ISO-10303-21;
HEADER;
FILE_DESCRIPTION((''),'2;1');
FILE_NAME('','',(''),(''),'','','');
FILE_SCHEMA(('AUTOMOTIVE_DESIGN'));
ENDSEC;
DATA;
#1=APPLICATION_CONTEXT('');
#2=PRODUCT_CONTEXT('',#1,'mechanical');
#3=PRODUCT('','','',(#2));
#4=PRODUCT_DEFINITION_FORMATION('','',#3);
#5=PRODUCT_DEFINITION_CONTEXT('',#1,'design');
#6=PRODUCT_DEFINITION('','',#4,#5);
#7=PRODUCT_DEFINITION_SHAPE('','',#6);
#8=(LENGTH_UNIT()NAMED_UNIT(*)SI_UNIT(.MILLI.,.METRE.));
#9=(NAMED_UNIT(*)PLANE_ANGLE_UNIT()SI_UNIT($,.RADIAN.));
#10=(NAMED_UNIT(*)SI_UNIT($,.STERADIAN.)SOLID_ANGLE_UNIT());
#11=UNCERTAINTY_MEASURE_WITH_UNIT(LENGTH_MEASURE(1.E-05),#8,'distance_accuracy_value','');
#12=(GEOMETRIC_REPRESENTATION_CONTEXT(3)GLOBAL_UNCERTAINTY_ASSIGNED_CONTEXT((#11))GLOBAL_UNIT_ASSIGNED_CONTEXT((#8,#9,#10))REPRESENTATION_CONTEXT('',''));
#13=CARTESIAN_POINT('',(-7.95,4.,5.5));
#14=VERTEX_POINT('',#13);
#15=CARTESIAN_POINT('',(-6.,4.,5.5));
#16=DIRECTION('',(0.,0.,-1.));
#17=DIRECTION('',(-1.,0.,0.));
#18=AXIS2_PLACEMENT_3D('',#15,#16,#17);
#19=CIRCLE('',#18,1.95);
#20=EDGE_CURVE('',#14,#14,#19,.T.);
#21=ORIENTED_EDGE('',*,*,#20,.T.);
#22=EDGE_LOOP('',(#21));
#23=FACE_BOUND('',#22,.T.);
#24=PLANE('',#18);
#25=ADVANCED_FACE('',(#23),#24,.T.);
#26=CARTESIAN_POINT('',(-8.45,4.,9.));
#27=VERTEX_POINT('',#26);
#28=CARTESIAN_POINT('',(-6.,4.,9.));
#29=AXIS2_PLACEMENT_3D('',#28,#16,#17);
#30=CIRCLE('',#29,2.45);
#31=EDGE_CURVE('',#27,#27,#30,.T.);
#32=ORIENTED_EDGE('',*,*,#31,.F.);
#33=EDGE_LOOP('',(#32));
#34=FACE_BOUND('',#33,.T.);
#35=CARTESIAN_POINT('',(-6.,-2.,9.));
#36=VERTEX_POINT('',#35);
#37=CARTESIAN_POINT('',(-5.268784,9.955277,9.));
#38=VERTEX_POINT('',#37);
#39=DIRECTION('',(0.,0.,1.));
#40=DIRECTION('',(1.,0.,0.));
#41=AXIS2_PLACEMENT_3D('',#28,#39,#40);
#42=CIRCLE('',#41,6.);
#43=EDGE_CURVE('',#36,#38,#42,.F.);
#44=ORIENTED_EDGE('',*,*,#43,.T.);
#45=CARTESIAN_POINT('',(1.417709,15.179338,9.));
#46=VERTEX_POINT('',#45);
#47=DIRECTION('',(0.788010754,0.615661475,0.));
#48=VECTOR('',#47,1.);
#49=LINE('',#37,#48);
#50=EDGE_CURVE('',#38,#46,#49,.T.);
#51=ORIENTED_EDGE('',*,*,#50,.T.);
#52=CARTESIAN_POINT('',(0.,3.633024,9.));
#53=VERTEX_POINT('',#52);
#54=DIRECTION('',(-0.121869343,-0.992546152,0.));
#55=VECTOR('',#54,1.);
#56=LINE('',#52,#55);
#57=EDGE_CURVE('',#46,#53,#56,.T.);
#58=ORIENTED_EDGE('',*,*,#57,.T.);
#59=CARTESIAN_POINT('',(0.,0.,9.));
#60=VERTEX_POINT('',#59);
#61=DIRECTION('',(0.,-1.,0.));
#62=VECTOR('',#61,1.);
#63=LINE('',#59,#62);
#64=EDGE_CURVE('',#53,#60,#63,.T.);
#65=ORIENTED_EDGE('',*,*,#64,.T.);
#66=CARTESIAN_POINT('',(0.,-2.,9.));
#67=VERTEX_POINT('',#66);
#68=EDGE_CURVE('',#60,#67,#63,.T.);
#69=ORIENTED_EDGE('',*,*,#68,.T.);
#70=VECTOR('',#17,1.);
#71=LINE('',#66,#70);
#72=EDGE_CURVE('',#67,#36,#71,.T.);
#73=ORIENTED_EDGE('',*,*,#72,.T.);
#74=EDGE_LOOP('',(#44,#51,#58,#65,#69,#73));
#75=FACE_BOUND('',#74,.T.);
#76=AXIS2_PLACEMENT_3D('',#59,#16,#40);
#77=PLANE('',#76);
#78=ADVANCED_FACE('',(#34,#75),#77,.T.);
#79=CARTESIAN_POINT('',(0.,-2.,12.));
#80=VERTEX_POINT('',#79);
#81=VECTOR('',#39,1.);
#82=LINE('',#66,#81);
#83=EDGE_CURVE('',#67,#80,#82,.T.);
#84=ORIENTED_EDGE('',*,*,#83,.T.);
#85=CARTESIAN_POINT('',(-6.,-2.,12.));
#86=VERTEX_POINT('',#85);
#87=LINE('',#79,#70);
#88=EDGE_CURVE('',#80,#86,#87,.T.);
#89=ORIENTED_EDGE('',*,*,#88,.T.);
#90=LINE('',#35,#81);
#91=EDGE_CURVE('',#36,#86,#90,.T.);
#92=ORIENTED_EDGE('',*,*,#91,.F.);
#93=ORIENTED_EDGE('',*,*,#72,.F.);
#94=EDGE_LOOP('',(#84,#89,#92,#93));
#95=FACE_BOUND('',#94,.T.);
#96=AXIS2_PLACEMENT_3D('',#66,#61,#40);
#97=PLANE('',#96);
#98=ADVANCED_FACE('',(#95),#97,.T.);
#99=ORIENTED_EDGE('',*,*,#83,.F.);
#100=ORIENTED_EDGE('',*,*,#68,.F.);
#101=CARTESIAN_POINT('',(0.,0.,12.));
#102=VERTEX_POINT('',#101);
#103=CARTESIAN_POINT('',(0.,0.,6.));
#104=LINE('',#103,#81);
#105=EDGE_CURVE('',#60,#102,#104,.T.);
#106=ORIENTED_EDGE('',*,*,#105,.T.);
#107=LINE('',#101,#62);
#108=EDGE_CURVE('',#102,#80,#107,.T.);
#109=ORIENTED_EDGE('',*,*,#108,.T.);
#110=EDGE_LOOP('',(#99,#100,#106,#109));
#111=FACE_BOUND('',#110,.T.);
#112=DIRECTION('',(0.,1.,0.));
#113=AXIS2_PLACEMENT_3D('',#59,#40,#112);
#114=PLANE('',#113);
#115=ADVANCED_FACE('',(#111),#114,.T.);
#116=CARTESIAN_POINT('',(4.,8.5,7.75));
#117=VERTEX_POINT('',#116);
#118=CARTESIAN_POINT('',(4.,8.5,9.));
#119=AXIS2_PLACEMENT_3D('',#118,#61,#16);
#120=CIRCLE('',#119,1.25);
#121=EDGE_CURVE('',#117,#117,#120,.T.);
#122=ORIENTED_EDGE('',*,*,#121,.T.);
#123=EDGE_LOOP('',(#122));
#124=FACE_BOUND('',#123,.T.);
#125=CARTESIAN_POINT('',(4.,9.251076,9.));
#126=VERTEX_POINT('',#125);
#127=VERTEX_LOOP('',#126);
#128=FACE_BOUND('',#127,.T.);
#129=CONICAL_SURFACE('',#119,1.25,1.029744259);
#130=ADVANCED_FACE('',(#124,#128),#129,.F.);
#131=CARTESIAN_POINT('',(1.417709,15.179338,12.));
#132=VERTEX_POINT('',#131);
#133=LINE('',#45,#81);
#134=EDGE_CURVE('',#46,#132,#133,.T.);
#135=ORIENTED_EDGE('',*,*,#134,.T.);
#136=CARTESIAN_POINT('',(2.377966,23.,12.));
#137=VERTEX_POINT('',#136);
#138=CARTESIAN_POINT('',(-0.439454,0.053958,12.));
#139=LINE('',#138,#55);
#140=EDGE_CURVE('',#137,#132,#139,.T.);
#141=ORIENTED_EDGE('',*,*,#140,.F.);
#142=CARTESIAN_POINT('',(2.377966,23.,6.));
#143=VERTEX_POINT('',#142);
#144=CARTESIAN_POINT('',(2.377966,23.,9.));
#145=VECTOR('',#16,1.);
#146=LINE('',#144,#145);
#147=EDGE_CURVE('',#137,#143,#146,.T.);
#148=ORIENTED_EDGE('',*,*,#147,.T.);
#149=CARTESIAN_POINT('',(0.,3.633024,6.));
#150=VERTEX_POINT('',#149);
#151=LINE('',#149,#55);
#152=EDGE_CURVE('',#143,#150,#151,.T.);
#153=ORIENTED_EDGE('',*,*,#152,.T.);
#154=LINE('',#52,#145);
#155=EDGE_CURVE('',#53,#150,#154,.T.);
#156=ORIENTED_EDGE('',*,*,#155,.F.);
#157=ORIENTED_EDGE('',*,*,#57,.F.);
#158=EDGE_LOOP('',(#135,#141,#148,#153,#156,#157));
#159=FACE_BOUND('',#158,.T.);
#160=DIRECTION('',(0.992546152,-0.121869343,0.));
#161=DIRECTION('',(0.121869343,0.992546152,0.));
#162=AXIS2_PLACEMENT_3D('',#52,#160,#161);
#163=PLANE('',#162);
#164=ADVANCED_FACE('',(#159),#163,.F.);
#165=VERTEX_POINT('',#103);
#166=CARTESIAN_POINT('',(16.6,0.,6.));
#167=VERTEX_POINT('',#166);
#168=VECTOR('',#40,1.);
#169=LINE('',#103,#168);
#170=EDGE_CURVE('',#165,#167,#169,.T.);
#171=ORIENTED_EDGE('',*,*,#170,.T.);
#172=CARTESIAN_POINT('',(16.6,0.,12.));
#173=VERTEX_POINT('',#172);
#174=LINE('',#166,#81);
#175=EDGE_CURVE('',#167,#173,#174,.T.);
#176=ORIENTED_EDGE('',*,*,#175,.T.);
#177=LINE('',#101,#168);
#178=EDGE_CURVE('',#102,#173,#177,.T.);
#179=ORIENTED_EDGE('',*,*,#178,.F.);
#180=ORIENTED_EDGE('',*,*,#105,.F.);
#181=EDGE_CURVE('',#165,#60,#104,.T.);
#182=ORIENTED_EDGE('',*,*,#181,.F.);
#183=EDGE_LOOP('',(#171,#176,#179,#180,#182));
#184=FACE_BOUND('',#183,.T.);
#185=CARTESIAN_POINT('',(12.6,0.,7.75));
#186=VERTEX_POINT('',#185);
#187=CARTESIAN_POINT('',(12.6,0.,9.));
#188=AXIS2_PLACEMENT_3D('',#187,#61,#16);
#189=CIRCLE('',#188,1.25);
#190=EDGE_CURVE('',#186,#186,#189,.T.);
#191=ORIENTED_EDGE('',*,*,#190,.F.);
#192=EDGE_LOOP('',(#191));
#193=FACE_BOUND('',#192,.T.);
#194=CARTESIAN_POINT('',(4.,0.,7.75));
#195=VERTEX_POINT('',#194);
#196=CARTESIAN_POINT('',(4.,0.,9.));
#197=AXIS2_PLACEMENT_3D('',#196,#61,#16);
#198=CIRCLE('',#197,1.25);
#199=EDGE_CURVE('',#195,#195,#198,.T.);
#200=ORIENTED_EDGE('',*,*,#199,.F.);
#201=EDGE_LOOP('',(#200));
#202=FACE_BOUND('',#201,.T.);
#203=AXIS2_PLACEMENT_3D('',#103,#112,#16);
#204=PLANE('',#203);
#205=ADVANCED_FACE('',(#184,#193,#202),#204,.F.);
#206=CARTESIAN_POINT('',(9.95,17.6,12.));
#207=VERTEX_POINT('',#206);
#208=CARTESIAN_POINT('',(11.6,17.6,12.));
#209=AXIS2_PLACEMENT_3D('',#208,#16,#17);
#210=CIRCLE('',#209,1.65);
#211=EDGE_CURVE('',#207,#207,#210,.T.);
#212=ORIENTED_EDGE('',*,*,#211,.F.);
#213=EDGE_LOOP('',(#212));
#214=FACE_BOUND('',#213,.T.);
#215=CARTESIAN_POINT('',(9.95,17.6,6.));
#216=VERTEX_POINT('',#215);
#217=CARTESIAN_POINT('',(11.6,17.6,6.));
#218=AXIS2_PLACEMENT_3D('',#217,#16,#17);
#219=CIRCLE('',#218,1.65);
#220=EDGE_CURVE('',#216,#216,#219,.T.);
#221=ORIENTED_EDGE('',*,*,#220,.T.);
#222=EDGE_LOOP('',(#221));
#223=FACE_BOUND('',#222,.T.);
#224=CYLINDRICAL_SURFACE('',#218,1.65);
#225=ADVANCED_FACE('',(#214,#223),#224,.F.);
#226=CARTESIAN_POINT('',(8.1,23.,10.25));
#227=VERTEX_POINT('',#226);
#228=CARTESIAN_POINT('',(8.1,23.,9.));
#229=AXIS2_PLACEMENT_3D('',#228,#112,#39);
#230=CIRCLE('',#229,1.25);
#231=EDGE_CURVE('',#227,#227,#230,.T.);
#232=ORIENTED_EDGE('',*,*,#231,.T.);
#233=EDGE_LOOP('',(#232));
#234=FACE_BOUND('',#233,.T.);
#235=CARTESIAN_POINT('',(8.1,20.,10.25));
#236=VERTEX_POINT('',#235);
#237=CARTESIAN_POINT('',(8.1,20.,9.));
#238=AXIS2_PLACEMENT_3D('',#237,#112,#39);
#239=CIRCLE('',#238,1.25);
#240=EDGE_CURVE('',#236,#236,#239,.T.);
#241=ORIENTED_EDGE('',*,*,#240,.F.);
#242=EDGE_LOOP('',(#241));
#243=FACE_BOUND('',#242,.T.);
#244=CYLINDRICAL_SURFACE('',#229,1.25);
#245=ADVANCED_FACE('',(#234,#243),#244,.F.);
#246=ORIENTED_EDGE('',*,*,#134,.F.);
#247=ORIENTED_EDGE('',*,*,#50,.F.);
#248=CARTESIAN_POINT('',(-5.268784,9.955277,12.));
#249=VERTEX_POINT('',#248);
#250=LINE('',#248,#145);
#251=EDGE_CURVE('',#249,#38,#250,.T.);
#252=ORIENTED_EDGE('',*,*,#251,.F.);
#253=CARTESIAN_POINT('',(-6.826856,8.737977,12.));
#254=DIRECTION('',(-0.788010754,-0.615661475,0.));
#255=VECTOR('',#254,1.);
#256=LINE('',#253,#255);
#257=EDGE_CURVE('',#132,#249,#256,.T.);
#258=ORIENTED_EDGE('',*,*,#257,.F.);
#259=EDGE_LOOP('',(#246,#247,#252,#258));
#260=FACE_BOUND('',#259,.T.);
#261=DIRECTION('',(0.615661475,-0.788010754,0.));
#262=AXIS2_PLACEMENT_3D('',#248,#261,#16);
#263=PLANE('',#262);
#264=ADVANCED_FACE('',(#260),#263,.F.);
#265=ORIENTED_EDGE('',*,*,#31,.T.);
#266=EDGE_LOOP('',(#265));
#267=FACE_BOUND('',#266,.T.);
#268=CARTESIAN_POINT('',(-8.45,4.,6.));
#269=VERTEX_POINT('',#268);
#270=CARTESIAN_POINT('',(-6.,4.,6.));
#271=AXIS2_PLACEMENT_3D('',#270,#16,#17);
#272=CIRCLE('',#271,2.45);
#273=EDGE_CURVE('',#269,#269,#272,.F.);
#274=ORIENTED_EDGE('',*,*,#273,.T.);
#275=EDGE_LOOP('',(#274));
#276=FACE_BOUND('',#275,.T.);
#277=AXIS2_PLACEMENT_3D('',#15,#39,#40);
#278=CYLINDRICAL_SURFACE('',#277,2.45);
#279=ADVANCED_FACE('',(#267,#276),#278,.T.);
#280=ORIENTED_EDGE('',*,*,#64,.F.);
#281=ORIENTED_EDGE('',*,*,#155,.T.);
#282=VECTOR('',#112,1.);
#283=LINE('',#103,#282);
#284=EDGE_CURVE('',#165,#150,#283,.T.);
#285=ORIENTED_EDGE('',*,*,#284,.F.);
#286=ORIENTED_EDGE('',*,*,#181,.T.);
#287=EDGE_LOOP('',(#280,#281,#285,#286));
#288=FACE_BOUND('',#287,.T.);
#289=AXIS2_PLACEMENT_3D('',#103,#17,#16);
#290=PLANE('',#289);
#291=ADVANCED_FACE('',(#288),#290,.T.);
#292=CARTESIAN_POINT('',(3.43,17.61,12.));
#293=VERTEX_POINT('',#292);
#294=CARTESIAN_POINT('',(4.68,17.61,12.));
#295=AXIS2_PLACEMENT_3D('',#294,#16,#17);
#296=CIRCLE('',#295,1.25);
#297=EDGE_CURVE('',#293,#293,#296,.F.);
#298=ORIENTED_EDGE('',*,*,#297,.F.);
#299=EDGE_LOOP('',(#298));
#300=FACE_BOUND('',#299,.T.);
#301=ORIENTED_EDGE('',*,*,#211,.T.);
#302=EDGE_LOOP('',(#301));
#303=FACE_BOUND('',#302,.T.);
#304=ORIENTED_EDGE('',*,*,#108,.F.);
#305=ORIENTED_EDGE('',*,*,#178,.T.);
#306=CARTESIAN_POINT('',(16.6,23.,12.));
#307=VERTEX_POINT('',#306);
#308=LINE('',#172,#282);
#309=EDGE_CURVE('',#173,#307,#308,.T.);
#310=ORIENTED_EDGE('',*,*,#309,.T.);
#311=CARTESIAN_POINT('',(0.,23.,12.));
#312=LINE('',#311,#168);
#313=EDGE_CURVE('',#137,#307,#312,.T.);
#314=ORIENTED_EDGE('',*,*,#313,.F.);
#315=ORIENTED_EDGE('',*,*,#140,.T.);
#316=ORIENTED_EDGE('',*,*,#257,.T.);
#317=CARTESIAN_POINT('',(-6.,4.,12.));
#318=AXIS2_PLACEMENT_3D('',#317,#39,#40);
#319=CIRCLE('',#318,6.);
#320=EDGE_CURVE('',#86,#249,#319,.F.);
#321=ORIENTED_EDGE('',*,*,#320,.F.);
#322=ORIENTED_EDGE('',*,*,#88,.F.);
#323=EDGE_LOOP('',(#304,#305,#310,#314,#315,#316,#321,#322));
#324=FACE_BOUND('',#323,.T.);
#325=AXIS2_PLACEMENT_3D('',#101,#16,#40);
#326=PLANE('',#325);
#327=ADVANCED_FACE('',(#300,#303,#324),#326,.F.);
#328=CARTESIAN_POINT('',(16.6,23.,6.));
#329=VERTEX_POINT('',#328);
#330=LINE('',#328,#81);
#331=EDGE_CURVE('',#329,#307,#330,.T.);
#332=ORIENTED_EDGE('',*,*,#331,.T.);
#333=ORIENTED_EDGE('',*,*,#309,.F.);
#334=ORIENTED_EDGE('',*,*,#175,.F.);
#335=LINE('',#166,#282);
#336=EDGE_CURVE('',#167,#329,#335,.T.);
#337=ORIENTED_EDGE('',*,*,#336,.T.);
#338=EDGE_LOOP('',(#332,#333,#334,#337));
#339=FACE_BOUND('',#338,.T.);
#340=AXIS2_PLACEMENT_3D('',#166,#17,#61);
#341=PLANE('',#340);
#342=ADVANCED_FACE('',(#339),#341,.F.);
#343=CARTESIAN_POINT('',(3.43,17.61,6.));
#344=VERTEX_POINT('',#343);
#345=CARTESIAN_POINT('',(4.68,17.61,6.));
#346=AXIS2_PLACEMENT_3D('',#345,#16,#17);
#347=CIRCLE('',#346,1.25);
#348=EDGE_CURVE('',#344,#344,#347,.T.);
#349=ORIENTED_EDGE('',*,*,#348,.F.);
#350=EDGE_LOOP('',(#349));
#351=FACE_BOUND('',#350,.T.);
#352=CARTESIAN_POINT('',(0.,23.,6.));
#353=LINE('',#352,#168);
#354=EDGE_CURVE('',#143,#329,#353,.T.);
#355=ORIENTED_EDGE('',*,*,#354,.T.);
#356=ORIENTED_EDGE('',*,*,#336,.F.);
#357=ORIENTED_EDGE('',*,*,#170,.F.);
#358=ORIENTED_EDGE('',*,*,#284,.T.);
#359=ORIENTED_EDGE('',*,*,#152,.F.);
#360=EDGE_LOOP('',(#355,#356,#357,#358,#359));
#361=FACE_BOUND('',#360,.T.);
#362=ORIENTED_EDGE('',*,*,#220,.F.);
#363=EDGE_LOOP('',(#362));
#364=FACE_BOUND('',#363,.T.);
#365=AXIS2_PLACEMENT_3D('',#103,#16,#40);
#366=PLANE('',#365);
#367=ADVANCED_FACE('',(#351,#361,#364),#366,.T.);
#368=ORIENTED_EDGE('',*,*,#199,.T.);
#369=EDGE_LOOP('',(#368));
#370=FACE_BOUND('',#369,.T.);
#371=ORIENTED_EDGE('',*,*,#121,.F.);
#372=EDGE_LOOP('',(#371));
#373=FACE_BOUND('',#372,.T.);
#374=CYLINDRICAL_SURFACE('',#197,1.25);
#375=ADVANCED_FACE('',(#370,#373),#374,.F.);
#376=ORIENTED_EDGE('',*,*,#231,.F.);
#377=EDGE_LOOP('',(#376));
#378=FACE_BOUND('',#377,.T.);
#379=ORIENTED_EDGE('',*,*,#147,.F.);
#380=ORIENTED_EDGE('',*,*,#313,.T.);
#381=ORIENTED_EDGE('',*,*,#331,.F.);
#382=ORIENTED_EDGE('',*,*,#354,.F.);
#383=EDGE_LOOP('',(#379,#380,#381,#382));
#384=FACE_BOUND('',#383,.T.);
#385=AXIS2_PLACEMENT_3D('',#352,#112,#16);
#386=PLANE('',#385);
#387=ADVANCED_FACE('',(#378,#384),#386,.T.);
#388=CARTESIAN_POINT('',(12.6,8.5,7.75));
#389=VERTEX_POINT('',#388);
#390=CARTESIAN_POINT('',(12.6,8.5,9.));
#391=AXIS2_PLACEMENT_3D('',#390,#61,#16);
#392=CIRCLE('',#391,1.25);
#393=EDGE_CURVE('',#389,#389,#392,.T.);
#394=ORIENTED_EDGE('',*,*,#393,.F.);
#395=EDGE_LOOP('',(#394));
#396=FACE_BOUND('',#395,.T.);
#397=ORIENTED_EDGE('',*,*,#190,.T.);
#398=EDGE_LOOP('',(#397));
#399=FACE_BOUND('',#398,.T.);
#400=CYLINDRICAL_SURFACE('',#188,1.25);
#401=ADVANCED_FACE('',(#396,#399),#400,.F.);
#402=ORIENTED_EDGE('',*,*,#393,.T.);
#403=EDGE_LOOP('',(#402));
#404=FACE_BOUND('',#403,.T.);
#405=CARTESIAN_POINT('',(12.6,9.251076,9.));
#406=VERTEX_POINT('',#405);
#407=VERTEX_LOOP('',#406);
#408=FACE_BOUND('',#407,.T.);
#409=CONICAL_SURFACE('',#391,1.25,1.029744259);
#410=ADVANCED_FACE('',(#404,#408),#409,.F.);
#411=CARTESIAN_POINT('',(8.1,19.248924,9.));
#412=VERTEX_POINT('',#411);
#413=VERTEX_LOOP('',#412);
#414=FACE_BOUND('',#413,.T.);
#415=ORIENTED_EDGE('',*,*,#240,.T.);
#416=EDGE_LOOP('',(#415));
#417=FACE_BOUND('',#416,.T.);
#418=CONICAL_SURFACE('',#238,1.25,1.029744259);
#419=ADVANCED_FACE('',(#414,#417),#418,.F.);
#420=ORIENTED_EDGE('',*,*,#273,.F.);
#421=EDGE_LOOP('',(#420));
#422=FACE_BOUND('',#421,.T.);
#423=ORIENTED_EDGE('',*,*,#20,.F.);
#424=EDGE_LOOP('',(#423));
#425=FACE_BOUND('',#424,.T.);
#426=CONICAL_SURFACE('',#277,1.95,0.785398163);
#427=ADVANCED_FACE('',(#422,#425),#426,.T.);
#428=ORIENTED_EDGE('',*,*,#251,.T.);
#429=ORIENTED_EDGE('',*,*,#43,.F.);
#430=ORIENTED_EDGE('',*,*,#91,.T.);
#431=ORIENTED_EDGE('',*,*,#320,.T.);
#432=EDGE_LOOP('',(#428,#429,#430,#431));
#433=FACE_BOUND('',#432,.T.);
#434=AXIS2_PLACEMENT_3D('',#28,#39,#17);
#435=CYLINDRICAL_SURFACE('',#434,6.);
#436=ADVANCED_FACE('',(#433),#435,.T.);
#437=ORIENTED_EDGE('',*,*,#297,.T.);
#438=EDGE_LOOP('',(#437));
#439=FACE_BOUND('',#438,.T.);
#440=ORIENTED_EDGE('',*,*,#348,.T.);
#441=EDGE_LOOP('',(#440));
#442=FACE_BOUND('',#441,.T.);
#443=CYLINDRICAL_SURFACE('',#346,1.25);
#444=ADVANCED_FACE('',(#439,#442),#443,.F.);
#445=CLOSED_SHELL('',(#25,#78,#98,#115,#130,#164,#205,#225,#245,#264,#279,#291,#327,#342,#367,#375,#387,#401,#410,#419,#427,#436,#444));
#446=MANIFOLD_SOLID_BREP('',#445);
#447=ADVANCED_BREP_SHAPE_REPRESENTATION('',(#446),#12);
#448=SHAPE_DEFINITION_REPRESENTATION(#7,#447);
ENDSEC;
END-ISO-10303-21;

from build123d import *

# Parameters (mm, degrees)
RESSALTO_EXTRUS_O1_DEPTH      = 3
ESBO_O1_3_W                   = 16.6
ESBO_O1_3_H                   = 23
ESBO_O1_3_R                   = 1.5
ESBO_O1_3_R_2                 = 0.5
RESSALTO_EXTRUS_O2_DEPTH      = 6
CORTE_EXTRUS_O1_DEPTH         = 3
CORTE_EXTRUS_O2_DEPTH         = 3
CHANFRO1_SIZE                 = 6
FURO_ROSCADO_DE_M3X0_51_D     = 2.5
FURO_ROSCADO_DE_M3X0_51_DEPTH = 8.5
FURO_ROSCADO_DE_M3X0_51_TIP   = 0.751075774
FURO_ROSCADO_DE_M3X0_52_D     = 2.5
FURO_ROSCADO_DE_M3X0_53_D     = 2.5
FURO_ROSCADO_DE_M3X0_53_DEPTH = 3
FURO_ROSCADO_DE_M3X0_53_TIP   = 0.751075774
ESBO_O17_R                    = 2.45
RESSALTO_EXTRUS_O3_DEPTH      = 3.5
CHANFRO2_SIZE                 = 0.5
FURO_ROSCADO_DE_M4X0_73_D     = 3.3
FURO_ROSCADO_DE_M4X0_73_DEPTH = 11.5
FURO_ROSCADO_DE_M4X0_73_TIP   = 0.991420021


with BuildPart() as part:
    # Esboço1 → Ressalto-extrusão1 (new body)
    with BuildSketch(Plane.XY):
        with BuildLine():
            Line((0, -2), (0, 0))
            Line((0, 0), (0, 16))
            ThreePointArc((0, 16), (-1.757359313, 11.757359313), (-6, 10))
            ThreePointArc((-6, 10), (-12, 4), (-6, -2))
            Line((-6, -2), (0, -2))
        make_face()
    extrude(amount=RESSALTO_EXTRUS_O1_DEPTH)

    # Esboço1<3> → Ressalto-extrusão2 (add)
    with BuildSketch(Plane.XY):
        with Locations((8.3, 11.5)):
            Rectangle(ESBO_O1_3_W, ESBO_O1_3_H)
        with Locations((11.6, 17.6)):
            Circle(ESBO_O1_3_R, mode=Mode.SUBTRACT)
        with Locations((4.68, 17.61)):
            Circle(ESBO_O1_3_R_2, mode=Mode.SUBTRACT)
    extrude(amount=RESSALTO_EXTRUS_O2_DEPTH)


with BuildPart() as body_2:
    # Espelhar1: mirrored copy
    add(part.part.mirror(Plane.XY.offset(6)))

    # Esboço4 → Corte-extrusão1 (cut)
    with BuildSketch(Plane(origin=(0, 0, 6), x_dir=(-1, 0, 0), z_dir=(0, 0, -1))):
        Polygon((0, 3.633024279), (-2.37796561, 23), (0, 23), align=None)
    extrude(amount=-CORTE_EXTRUS_O1_DEPTH, mode=Mode.SUBTRACT)

    # Esboço5 → Corte-extrusão2 (cut)
    with BuildSketch(Plane(origin=(0, 0, 9), x_dir=(-1, 0, 0), z_dir=(0, 0, -1))):
        with BuildLine():
            Line((-0.68649297, 9.224060849), (5.26878394, 9.95527691))
            ThreePointArc((5.26878394, 9.95527691), (5.633708763, 9.988808791), (6, 10))
            ThreePointArc((6, 10), (1.757359313, 11.757359313), (0, 16))
            Line((0, 16), (0, 23))
            Line((0, 23), (-2.37796561, 23))
            Line((-2.37796561, 23), (-0.68649297, 9.224060849))
        make_face()
    extrude(amount=-CORTE_EXTRUS_O2_DEPTH, mode=Mode.SUBTRACT)

    # Chanfro1
    # the kernel refuses this chamfer: 6 mm, written as the material it adds along each edge
    with BuildSketch(Plane(origin=(0.68649297, 9.224060849, 9), x_dir=(-0.9955217911555101, 0.09453234015153285, 0), z_dir=(0, 0, 1))) as chanfro1_piece_1:
        Polygon((CHANFRO1_SIZE * 0.999621916911, -CHANFRO1_SIZE * 0.0274958766106), (-CHANFRO1_SIZE * 0.0274958766106, -CHANFRO1_SIZE * 0.999621916911), (0, 0), align=None)
    extrude(amount=3)

    # Furo roscado de M3x0.51
    with Locations(Plane.XZ):
        with Locations((4, 9), (12.6, 9)):
            Hole(FURO_ROSCADO_DE_M3X0_51_D / 2, depth=FURO_ROSCADO_DE_M3X0_51_DEPTH)
            with Locations((0, 0, -(FURO_ROSCADO_DE_M3X0_51_DEPTH + FURO_ROSCADO_DE_M3X0_51_TIP / 2))):  # 118° drill point
                Cone(0, FURO_ROSCADO_DE_M3X0_51_D / 2, FURO_ROSCADO_DE_M3X0_51_TIP, mode=Mode.SUBTRACT)

    # Furo roscado de M3x0.52 (through all)
    with Locations(Plane(origin=(0, 0, 6), x_dir=(-1, 0, 0), z_dir=(0, 0, -1))):
        with Locations((-4.68, 17.61)):
            Hole(FURO_ROSCADO_DE_M3X0_52_D / 2)

    # Furo roscado de M3x0.53
    with Locations(Plane(origin=(0, 23, 0), x_dir=(-1, 0, 0), z_dir=(0, 1, 0))):
        with Locations((-8.1, 9)):
            Hole(FURO_ROSCADO_DE_M3X0_53_D / 2, depth=FURO_ROSCADO_DE_M3X0_53_DEPTH)
            with Locations((0, 0, -(FURO_ROSCADO_DE_M3X0_53_DEPTH + FURO_ROSCADO_DE_M3X0_53_TIP / 2))):  # 118° drill point
                Cone(0, FURO_ROSCADO_DE_M3X0_53_D / 2, FURO_ROSCADO_DE_M3X0_53_TIP, mode=Mode.SUBTRACT)

    # Esboço17 → Ressalto-extrusão3 (add)
    with BuildSketch(Plane(origin=(0, 0, 9), x_dir=(-1, 0, 0), z_dir=(0, 0, -1))):
        with Locations((6, 4)):
            Circle(ESBO_O17_R)
    extrude(amount=RESSALTO_EXTRUS_O3_DEPTH)

    # Chanfro2
    chanfro2_edges = [body_2.edges().sort_by_distance(p)[0] for p in [
        (-3.55, 4, 5.5),
    ]]
    chamfer(chanfro2_edges, length=CHANFRO2_SIZE)

    # Furo roscado de M4x0.73
    with Locations(Plane(origin=(0, 0, 6), x_dir=(-1, 0, 0), z_dir=(0, 0, -1))):
        with Locations((-11.6, 17.6)):
            Hole(FURO_ROSCADO_DE_M4X0_73_D / 2, depth=FURO_ROSCADO_DE_M4X0_73_DEPTH)
            with Locations((0, 0, -(FURO_ROSCADO_DE_M4X0_73_DEPTH + FURO_ROSCADO_DE_M4X0_73_TIP / 2))):  # 118° drill point
                Cone(0, FURO_ROSCADO_DE_M4X0_73_D / 2, FURO_ROSCADO_DE_M4X0_73_TIP, mode=Mode.SUBTRACT)


solid = body_2.part
